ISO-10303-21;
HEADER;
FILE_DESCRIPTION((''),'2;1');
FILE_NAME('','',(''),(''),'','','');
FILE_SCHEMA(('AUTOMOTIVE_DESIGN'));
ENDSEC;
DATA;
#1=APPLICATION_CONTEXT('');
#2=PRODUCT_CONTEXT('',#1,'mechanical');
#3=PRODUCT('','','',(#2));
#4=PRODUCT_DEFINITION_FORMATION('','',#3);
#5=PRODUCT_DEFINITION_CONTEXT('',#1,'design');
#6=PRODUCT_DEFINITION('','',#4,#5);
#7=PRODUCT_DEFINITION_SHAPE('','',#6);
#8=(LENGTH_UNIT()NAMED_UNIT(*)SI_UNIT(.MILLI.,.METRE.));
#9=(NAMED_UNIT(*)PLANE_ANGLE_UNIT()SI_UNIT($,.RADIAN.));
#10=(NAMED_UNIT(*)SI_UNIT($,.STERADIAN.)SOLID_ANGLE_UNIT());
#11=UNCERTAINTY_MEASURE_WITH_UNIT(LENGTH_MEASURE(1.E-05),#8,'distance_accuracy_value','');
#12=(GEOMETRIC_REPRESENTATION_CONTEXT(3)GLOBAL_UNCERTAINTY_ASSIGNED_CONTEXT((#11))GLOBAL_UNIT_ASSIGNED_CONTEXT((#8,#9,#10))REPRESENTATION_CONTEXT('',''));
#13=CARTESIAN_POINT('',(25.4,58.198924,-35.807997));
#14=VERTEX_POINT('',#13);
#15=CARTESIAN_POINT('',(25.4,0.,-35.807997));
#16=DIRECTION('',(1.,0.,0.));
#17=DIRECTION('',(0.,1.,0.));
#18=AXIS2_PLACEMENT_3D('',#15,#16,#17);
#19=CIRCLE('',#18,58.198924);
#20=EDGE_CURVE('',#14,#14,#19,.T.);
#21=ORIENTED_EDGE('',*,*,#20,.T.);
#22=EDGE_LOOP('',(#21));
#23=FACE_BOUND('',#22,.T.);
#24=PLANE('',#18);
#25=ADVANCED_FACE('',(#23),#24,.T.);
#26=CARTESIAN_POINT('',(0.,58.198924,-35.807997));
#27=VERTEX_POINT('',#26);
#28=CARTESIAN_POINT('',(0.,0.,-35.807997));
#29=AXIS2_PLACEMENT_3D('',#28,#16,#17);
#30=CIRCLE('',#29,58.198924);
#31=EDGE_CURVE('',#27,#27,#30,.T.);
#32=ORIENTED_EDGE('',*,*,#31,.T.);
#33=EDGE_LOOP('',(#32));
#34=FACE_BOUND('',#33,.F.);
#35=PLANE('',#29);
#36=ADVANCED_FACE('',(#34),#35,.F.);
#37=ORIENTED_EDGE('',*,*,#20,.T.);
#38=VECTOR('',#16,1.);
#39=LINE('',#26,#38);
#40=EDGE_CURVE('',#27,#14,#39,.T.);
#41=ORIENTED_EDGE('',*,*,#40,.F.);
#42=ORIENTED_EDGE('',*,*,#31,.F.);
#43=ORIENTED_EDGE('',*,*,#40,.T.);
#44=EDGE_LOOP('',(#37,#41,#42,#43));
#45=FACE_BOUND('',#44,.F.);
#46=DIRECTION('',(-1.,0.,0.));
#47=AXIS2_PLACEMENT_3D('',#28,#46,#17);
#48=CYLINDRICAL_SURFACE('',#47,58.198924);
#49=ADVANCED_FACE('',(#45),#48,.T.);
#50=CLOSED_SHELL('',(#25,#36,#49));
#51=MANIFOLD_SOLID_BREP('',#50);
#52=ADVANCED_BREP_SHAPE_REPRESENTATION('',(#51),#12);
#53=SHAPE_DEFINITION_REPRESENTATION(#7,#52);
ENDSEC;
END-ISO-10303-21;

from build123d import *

# Parameters (mm, degrees)
F0_R     = 58.1989244335
F2_DEPTH = 25.4


# Not quite as in the source:
# - the program builds the solid bodies; features that only make, move or delete a surface that nothing else refers to are left out


with BuildPart() as f2:
    # F0 (on Right) → F2 (new body)
    with BuildSketch(Plane.YZ):
        with Locations((0, -35.8079969883)):
            Circle(F0_R)
    extrude(amount=F2_DEPTH)


solid = f2.part
